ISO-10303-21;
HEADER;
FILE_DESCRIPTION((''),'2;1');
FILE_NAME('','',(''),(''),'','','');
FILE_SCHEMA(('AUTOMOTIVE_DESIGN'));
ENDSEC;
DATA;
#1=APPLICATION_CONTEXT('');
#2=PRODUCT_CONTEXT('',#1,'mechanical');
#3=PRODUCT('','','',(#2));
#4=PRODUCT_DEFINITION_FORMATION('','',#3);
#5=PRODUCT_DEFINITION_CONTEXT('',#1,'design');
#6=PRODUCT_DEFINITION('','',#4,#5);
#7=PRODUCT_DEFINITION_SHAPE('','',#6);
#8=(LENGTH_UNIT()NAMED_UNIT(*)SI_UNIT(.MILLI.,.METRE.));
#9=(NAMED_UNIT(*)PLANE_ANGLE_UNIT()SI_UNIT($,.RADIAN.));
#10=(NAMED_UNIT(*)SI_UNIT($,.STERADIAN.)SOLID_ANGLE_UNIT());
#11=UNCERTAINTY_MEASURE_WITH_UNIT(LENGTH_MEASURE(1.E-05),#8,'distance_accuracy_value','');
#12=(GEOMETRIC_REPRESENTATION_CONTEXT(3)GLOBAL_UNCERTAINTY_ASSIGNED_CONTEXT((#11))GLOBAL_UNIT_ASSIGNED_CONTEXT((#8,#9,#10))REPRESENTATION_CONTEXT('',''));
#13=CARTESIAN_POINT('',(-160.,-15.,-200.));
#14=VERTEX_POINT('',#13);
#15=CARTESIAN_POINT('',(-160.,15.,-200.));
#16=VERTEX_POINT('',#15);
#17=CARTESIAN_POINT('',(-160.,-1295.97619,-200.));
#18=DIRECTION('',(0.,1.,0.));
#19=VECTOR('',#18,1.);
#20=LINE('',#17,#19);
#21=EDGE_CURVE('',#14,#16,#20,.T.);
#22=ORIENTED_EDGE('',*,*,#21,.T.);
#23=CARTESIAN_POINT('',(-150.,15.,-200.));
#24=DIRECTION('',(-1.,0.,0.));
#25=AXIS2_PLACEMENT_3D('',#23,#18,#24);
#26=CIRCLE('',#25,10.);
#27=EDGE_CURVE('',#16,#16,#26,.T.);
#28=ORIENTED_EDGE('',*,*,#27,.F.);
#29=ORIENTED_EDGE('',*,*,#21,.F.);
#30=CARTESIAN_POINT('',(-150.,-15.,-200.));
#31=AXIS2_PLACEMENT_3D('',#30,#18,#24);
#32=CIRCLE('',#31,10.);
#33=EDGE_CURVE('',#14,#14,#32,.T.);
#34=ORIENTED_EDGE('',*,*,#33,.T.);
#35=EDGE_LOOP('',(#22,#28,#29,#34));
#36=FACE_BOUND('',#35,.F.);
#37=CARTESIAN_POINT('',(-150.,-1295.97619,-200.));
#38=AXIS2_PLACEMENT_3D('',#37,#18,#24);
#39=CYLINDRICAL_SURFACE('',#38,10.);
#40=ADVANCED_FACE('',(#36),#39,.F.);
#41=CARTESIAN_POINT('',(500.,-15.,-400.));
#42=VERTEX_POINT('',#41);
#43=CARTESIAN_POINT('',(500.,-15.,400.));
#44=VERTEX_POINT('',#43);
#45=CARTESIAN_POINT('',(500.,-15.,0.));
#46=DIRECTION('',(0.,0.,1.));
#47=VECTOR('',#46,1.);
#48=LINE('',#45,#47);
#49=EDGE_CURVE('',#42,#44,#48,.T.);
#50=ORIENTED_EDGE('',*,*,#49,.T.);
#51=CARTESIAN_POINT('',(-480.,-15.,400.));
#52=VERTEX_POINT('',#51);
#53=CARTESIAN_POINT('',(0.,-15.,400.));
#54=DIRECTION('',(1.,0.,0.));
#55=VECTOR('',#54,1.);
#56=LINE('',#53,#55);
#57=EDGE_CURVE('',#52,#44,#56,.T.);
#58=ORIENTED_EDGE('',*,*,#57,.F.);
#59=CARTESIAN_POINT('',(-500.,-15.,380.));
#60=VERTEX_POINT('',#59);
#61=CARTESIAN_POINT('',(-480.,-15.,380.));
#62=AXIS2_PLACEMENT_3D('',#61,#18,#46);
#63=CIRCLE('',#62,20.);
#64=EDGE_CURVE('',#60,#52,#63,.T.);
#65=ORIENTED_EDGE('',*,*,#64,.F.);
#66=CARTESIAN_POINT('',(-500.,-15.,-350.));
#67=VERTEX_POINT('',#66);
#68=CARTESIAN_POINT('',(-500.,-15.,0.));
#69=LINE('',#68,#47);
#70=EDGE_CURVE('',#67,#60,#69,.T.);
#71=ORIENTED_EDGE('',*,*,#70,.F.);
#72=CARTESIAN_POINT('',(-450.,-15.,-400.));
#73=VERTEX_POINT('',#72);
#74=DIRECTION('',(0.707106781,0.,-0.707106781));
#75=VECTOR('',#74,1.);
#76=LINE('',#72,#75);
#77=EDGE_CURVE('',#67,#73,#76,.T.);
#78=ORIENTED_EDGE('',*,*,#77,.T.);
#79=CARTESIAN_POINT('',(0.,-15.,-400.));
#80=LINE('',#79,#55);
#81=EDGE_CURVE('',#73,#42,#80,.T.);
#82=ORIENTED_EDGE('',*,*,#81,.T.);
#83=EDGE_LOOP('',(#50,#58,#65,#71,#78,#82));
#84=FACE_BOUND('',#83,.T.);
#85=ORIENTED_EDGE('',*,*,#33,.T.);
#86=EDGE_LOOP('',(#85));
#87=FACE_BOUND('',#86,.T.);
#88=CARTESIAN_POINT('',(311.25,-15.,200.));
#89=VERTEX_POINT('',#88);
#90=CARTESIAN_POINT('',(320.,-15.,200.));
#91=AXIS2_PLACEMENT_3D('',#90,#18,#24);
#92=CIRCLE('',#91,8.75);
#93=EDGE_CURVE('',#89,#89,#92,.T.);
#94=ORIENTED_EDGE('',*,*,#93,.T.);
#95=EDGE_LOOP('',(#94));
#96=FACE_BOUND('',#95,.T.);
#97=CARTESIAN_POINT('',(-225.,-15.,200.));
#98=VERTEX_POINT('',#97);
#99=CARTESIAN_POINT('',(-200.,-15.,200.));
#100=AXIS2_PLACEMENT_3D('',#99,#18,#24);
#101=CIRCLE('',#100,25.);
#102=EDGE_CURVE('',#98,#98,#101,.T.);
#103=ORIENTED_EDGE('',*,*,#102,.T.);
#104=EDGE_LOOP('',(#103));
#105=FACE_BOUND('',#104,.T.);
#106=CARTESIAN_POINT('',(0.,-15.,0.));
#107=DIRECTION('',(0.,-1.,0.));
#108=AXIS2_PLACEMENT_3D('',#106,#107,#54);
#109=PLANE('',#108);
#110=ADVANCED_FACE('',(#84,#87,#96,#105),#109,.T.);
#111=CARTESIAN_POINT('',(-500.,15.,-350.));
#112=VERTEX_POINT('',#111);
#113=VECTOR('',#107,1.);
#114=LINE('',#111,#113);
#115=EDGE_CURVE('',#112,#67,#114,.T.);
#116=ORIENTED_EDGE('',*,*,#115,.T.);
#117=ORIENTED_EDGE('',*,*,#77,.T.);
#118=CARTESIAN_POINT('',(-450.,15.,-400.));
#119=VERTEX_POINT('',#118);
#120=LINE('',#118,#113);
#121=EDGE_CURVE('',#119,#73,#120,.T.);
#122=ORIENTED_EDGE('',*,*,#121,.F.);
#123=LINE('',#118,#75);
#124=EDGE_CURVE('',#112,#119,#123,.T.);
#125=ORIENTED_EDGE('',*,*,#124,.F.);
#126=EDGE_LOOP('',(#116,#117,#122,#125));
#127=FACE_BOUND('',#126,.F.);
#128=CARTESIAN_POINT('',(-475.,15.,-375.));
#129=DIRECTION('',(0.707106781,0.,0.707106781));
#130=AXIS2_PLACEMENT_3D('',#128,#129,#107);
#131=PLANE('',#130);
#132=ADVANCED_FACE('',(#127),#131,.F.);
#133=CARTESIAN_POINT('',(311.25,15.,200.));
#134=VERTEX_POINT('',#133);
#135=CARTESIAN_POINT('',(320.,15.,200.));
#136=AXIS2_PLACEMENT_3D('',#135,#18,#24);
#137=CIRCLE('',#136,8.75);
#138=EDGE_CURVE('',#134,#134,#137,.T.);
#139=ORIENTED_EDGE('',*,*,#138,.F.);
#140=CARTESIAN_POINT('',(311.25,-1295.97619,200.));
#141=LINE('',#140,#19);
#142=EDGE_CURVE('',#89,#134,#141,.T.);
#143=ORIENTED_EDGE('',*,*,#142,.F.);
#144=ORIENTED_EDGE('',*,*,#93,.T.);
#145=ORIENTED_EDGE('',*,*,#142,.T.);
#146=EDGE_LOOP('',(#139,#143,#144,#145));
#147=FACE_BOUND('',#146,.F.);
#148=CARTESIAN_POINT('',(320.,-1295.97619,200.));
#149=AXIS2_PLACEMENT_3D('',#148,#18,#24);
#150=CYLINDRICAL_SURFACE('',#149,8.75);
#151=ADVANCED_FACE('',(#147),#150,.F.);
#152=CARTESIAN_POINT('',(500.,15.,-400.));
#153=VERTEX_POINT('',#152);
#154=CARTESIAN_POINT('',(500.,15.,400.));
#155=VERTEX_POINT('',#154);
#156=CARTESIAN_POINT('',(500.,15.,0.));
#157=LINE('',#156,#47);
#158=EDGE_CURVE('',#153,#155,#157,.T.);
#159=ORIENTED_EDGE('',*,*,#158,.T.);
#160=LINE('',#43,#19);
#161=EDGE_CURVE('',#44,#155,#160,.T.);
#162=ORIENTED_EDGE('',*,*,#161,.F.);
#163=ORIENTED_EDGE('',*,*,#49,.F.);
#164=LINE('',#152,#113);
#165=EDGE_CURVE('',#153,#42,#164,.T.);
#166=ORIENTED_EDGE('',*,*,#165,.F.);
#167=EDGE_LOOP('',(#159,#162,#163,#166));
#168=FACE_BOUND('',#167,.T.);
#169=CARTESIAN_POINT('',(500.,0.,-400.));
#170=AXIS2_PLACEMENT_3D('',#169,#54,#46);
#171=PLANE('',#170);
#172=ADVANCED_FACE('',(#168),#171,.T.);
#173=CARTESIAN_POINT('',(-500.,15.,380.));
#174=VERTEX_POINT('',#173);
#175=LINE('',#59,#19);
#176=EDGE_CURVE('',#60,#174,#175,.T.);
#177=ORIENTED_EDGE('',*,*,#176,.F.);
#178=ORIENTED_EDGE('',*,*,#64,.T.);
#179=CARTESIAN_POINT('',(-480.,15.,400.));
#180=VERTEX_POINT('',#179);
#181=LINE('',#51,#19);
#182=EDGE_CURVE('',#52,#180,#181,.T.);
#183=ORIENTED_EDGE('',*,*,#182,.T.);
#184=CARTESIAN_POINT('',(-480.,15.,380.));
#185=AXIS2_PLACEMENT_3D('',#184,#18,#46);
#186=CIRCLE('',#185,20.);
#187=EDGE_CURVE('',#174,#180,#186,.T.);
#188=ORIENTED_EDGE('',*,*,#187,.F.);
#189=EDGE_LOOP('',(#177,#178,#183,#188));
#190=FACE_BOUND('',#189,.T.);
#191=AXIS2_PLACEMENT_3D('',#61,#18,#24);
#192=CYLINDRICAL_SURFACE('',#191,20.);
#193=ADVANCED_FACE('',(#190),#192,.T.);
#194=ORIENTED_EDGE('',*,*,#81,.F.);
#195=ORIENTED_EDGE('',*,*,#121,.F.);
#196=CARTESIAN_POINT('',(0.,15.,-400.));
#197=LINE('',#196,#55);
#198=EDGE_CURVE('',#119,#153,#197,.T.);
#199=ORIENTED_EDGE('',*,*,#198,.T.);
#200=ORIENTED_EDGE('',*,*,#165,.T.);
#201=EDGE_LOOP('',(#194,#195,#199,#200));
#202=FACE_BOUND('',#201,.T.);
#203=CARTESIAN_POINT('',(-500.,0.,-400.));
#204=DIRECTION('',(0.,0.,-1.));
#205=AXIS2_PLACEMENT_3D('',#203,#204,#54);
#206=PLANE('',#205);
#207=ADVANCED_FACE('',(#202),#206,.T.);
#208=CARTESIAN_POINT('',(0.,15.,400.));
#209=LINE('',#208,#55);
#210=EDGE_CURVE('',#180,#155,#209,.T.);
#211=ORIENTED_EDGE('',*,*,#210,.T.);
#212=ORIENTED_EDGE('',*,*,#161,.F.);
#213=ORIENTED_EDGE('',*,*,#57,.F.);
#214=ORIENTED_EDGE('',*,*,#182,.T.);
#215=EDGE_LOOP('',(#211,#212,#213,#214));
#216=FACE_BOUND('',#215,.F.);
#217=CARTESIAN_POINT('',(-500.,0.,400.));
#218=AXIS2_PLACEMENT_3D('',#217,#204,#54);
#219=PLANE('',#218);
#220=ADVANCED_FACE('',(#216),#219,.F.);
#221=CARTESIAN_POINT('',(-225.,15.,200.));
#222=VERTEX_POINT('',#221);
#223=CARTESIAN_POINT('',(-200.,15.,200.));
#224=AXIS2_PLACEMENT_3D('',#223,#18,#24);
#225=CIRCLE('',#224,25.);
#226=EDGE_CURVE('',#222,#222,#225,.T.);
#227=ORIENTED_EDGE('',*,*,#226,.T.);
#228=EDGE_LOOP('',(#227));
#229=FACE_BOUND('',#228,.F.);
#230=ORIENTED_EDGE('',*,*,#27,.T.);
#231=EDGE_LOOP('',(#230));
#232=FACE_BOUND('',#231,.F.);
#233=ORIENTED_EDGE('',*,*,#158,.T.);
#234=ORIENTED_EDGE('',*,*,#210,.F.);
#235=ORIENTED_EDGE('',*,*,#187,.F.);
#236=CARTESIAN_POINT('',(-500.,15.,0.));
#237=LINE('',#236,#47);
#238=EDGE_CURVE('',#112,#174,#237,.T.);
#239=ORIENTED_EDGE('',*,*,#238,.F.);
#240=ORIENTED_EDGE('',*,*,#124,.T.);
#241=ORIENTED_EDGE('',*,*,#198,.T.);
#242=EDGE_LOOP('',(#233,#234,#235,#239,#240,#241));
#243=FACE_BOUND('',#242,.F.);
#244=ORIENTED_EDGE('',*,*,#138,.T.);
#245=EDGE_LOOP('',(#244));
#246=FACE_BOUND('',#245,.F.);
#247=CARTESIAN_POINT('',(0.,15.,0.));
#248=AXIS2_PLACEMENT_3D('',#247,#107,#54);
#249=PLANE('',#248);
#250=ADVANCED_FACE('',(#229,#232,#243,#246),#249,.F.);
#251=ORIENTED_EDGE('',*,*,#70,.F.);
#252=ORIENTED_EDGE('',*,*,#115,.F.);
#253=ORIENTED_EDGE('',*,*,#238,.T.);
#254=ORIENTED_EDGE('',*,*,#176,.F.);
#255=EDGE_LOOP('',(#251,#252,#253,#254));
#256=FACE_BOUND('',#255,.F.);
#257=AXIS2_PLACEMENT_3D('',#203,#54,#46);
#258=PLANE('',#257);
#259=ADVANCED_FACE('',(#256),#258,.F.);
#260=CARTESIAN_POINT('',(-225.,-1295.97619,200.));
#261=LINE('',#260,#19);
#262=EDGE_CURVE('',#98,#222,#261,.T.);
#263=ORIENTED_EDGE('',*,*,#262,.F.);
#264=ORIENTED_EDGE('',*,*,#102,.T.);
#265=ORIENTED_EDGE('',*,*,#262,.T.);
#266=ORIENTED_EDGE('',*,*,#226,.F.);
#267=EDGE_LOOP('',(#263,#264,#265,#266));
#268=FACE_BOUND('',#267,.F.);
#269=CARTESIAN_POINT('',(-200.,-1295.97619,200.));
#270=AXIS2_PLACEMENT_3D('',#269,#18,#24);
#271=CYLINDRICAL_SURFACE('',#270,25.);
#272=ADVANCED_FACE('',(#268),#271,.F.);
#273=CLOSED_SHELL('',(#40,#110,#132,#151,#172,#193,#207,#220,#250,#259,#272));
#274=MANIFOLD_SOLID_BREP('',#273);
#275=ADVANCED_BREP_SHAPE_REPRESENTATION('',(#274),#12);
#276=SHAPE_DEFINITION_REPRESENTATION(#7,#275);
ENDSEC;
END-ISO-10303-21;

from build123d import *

# Parameters (mm, degrees)
F0_W     = 1000
F0_H     = 800
F1_DEPTH = 15
F3_D     = 50
F4_D     = 20
F5_D     = 17.5
F6_R     = 20
F7_SIZE  = 50


with BuildPart() as f1:
    # F0 (on Front) → F1 (new body, symmetric)
    with BuildSketch(Plane.XZ):
        Rectangle(F0_W, F0_H)
    extrude(amount=F1_DEPTH, both=True)

    # F3 (through all)
    with Locations(Plane.XZ.offset(15)):
        with Locations((-200, 200)):
            Hole(F3_D / 2)

    # F4 (through all)
    with Locations(Plane.XZ.offset(15)):
        with Locations((-150, -200)):
            Hole(F4_D / 2)

    # F5 (through all)
    with Locations(Plane.XZ.offset(15)):
        with Locations((320, 200)):
            Hole(F5_D / 2)

    # F6
    f6_edges = [f1.edges().sort_by_distance(p)[0] for p in [
        (-500, 0, 400),
    ]]
    fillet(f6_edges, radius=F6_R)

    # F7
    f7_edges = [f1.edges().sort_by_distance(p)[0] for p in [
        (-500, 0, -400),
    ]]
    chamfer(f7_edges, length=F7_SIZE)


solid = f1.part
